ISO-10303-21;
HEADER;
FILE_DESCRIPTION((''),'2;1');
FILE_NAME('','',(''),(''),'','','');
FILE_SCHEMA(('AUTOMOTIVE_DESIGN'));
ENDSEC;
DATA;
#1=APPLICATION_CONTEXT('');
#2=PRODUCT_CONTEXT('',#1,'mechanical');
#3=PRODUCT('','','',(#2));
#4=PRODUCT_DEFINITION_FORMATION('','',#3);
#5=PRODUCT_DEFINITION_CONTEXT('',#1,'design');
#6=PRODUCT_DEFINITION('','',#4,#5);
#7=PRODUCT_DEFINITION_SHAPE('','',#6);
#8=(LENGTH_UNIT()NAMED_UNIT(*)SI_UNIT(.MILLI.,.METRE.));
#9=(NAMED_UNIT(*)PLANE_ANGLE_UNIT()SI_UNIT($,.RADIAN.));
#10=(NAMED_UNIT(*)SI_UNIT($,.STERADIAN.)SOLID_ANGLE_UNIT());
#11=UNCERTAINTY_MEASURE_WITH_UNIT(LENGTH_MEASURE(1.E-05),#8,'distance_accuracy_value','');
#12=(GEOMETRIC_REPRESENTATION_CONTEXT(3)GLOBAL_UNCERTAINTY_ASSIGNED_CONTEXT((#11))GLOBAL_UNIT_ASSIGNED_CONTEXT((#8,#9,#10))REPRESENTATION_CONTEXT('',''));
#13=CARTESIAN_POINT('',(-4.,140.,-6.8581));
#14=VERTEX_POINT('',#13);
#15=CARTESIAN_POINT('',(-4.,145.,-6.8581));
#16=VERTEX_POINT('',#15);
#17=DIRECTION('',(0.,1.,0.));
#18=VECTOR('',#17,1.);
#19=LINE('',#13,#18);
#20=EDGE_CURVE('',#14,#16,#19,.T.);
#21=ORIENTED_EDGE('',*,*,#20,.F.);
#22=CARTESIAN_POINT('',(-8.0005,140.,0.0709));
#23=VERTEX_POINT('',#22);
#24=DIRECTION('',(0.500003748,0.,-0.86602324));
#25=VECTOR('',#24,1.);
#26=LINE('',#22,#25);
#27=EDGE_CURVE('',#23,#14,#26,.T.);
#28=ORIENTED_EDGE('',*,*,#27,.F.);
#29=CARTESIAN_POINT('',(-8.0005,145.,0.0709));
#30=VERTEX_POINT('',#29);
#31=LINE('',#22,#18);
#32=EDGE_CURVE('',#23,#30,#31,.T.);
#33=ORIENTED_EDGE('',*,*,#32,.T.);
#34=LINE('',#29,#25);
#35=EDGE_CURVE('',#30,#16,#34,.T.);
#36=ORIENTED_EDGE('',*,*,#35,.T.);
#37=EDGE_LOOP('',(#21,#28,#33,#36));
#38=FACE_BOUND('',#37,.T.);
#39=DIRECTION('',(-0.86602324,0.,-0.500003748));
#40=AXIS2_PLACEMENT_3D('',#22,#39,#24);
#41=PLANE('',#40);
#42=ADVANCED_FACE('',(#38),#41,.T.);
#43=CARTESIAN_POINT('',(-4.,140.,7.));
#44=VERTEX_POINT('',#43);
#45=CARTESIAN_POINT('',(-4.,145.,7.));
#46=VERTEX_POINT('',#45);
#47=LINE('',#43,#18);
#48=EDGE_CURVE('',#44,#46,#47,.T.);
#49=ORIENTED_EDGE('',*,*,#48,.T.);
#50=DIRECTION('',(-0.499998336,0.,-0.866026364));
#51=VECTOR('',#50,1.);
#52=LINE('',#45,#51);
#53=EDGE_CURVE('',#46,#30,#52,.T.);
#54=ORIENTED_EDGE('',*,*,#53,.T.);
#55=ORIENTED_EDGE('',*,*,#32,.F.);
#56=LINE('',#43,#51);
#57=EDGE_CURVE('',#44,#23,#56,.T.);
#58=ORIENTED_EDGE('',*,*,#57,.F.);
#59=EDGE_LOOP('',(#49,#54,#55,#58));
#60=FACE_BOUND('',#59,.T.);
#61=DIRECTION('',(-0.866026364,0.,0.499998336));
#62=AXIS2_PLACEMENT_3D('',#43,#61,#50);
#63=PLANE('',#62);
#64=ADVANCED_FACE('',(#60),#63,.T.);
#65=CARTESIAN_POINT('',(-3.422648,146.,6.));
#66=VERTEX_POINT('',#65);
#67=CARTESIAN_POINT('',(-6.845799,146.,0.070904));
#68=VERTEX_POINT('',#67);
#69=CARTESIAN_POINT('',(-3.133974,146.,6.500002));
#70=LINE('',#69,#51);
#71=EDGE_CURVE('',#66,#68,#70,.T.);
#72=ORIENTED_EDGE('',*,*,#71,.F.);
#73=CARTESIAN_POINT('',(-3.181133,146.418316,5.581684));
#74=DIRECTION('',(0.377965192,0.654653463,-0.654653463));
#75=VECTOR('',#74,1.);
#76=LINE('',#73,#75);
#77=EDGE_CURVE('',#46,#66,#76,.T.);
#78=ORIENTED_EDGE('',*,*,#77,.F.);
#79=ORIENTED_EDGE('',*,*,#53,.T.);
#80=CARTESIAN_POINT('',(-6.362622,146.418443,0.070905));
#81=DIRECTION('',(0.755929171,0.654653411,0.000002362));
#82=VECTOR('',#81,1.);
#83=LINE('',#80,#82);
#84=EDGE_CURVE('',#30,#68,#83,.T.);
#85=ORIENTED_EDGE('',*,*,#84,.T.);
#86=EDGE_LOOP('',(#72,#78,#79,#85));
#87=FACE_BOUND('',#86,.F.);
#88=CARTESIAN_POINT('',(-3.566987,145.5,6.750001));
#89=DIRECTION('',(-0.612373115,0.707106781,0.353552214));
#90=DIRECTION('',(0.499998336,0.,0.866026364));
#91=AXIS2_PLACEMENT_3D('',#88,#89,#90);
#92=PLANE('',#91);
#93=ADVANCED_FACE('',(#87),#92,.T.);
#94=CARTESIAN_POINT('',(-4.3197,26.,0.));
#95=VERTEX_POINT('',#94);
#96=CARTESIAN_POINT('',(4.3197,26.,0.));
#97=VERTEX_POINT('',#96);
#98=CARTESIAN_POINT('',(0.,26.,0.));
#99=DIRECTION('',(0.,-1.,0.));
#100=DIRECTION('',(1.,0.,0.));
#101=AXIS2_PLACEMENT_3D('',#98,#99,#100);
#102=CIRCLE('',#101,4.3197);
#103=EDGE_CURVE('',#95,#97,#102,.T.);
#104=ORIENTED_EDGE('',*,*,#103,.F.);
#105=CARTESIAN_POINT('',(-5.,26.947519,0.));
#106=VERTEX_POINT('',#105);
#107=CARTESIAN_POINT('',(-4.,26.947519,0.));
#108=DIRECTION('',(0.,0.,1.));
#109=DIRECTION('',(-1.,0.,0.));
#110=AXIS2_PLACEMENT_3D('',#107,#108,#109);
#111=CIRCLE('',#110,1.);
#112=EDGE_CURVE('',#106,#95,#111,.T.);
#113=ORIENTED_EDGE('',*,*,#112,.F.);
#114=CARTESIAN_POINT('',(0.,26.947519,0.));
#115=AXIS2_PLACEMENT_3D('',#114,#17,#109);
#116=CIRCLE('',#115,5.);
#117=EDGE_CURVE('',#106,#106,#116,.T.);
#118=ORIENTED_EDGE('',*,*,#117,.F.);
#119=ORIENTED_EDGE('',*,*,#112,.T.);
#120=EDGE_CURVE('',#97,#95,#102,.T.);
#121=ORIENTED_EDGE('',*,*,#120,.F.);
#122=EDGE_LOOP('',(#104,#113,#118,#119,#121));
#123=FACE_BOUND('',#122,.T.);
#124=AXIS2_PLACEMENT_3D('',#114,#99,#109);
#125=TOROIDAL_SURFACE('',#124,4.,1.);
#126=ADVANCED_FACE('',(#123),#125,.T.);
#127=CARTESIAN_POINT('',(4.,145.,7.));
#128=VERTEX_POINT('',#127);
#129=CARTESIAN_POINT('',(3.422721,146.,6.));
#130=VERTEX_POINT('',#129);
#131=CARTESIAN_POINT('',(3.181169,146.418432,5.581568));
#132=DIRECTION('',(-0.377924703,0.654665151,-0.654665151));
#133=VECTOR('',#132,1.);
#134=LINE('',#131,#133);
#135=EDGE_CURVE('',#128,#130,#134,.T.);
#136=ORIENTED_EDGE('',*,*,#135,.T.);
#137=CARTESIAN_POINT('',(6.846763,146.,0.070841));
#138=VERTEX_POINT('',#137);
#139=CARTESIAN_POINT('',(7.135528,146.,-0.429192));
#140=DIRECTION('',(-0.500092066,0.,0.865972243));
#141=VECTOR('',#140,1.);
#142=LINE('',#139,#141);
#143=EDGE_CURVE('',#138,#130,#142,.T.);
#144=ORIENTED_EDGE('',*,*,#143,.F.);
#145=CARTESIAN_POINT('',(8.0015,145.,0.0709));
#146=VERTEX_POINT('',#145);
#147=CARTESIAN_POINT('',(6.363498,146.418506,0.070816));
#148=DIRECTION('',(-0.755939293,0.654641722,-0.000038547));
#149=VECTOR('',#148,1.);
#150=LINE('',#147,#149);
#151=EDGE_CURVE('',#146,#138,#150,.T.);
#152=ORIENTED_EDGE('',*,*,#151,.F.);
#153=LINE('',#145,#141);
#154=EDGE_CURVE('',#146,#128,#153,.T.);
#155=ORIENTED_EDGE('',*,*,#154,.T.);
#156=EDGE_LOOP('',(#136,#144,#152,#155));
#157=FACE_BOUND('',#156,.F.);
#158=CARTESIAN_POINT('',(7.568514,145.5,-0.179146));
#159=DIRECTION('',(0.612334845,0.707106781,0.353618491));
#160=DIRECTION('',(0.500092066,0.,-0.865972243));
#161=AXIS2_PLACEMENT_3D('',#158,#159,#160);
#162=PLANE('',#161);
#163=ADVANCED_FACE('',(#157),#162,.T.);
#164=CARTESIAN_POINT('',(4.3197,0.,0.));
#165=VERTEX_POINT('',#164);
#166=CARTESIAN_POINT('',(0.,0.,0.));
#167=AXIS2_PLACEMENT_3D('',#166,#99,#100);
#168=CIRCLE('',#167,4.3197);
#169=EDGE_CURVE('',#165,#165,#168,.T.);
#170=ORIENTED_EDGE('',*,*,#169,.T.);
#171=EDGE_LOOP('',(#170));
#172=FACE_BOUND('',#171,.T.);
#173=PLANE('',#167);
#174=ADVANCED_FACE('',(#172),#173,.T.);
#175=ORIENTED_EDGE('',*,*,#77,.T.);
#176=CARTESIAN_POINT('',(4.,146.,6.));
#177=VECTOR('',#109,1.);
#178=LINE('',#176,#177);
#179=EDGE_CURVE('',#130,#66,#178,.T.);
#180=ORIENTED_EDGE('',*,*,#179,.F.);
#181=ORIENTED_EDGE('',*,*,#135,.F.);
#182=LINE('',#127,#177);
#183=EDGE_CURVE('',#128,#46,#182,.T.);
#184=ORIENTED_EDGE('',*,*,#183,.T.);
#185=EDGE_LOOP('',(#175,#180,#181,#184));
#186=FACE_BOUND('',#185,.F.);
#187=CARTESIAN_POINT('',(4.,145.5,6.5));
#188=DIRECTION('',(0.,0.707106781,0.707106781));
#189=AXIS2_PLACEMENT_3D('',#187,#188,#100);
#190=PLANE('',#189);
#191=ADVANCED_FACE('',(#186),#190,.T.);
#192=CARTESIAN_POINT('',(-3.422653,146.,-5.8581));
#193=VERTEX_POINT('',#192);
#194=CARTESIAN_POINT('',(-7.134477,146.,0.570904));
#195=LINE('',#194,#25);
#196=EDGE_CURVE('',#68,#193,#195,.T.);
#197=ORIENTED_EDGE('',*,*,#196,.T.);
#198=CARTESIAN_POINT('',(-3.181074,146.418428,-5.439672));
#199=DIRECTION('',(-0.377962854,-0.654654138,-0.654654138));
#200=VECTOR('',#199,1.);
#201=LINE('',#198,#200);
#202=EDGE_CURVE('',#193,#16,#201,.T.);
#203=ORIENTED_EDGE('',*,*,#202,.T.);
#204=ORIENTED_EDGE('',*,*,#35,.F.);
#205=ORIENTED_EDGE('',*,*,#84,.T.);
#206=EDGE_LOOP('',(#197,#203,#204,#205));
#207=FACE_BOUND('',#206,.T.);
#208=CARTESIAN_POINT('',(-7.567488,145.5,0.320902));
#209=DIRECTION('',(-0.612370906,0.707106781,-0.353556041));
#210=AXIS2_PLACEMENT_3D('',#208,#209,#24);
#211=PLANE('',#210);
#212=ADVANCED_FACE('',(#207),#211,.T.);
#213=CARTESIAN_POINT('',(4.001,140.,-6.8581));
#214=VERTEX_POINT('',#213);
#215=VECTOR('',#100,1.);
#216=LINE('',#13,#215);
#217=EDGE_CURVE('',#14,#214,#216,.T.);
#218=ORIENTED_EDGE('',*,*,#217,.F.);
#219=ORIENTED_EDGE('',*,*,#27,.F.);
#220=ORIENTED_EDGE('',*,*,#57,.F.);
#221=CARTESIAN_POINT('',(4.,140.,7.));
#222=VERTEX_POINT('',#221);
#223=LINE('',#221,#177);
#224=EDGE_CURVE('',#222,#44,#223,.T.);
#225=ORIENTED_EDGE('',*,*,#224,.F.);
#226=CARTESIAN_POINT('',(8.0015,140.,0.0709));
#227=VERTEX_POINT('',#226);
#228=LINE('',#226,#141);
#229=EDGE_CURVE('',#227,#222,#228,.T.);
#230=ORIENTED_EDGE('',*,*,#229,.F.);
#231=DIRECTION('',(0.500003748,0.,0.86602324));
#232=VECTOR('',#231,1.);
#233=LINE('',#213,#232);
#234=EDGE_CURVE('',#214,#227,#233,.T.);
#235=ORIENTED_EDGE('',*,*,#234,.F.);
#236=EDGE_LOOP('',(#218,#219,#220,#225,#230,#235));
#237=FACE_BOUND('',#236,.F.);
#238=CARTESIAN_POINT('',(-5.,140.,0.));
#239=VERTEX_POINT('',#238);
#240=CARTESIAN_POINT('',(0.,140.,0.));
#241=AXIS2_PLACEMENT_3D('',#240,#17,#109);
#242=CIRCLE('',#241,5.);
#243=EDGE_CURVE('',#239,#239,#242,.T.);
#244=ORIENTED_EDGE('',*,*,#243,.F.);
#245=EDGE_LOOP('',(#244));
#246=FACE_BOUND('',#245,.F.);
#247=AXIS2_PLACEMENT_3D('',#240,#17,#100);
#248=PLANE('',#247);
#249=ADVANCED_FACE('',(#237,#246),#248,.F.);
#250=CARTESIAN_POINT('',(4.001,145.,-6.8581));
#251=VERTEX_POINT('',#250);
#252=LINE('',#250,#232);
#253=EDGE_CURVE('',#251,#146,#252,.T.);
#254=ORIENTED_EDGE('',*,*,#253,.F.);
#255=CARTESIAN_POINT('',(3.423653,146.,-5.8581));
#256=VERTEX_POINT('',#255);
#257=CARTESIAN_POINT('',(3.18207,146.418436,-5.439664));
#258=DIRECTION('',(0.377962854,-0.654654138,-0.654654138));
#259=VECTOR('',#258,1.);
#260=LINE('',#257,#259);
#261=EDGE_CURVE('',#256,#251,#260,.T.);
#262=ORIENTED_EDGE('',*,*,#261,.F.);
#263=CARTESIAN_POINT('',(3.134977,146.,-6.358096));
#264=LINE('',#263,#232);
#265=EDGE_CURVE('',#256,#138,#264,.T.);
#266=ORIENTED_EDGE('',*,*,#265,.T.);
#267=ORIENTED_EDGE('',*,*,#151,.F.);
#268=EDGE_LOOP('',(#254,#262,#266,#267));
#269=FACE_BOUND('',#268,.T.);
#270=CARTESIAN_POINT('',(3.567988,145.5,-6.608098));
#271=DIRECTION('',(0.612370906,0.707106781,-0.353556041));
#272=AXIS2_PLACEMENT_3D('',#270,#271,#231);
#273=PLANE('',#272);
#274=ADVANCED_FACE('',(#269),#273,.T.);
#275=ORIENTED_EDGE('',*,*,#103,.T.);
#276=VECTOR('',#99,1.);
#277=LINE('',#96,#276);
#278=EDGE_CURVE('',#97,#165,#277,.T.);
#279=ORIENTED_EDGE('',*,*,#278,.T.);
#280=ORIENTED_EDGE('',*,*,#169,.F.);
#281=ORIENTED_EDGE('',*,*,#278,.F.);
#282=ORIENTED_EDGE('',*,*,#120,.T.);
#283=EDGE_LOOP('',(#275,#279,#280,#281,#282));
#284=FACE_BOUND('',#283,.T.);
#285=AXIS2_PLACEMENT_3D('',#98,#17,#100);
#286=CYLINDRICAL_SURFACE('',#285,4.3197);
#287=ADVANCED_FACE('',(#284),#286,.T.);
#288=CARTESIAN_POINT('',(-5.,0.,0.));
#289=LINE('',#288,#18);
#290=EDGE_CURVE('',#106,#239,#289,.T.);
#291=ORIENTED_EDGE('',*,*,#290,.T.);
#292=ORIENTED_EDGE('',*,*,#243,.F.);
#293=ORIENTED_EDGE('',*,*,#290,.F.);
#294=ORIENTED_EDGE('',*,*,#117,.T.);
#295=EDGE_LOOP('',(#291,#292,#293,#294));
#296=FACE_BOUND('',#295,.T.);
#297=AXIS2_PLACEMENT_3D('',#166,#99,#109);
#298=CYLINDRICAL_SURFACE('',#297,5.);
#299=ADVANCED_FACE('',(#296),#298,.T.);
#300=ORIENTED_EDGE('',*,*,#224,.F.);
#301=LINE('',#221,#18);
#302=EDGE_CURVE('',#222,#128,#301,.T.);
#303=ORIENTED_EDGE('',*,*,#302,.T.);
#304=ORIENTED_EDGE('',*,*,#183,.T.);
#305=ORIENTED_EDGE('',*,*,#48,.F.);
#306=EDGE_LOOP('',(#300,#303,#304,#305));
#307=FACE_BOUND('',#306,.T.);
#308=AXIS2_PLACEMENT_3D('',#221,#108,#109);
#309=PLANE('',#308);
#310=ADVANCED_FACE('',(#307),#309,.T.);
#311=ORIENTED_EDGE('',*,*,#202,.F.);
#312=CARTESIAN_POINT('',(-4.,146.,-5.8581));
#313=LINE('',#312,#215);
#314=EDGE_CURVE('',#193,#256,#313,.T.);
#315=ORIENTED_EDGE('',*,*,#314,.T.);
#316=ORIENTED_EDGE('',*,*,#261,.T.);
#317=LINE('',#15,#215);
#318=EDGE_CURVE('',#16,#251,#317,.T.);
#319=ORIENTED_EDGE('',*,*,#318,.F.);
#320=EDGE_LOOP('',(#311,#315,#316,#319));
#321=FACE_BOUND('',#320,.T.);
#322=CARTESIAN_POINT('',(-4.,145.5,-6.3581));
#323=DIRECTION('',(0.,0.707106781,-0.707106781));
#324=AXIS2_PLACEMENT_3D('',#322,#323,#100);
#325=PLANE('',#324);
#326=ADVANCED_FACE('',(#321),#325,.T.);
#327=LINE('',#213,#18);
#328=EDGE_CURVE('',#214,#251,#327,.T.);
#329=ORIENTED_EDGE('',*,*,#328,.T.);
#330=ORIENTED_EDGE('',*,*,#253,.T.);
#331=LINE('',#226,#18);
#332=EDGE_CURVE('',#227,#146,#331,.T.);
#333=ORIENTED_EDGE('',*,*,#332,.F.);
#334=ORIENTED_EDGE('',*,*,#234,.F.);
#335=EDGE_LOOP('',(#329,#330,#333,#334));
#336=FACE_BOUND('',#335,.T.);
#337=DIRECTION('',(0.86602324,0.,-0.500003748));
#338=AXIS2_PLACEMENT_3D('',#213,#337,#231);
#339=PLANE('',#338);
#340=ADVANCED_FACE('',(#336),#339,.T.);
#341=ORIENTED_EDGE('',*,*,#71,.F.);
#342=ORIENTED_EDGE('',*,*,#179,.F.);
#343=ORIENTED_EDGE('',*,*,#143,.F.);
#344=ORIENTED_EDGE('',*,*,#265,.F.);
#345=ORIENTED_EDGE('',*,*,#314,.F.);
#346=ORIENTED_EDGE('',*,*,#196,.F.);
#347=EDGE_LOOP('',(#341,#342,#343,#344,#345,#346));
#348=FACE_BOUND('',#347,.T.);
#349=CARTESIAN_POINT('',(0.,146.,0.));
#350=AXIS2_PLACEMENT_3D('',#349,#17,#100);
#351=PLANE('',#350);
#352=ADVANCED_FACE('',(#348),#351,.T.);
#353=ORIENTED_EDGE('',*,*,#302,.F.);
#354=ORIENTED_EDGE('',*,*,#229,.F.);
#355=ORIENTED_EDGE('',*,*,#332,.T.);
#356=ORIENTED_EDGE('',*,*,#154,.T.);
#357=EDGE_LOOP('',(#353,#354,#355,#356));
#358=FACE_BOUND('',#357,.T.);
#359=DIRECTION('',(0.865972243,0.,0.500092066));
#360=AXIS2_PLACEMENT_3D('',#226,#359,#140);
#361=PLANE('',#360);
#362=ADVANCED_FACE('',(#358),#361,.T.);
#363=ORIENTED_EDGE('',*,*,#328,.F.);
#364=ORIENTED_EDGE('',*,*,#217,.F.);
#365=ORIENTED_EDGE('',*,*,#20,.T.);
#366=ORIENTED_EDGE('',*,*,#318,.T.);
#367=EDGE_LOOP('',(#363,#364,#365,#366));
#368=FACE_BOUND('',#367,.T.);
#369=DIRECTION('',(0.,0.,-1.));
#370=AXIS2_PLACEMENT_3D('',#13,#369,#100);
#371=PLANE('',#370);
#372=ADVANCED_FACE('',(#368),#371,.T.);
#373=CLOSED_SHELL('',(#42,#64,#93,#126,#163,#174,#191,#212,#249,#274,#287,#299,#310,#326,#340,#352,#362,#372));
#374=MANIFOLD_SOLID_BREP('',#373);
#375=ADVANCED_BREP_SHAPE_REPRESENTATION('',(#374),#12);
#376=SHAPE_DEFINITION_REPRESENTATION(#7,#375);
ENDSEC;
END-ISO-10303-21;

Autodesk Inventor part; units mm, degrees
ref_plane "YZ Plane" through (0, 0, 0) normal (1, 0, 0) x (0, 1, 0)
ref_plane "XZ Plane" through (0, 0, 0) normal (0, 1, 0) x (-1, 0, 0)
ref_plane "XY Plane" through (0, 0, 0) normal (0, 0, 1) x (1, 0, 0)
sketch "Sketch1" plane through (0, 0, 0) normal (0, 1, 0) x (-1, 0, 0)
  circle A0 centre (0, 0) radius 5
  dimension "d0" = 10
extrude "Extrusion1" add sketch "Sketch1" along normal blind 140
sketch "Sketch2" plane through (0, 140, 0) normal (0, 1, 0) x (1, 0, 0)
  line L0 (4, -7) -> (-4, -7)
  line L1 (-4, -7) -> (-8.0005, -0.0709)
  line L2 (-4, -7) -> (4.001, -7) construction
  line L3 (-8.0005, -0.0709) -> (-4, 6.8581)
  line L4 (-4, 6.8581) -> (4.001, 6.8581)
  line L5 (4.001, 6.8581) -> (8.0015, -0.0709)
  line L6 (8.0015, -0.0709) -> (4, -7)
  dimension "d5" = 8
  dimension "d6" = 8.001
  dimension "d7" = 120
  dimension "d8" = 8.001
  dimension "d9" = 120
  dimension "d10" = 8.001
  dimension "d11" = 120
  dimension "d12" = 8.001
  dimension "d13" = 120
extrude "Extrusion2" add sketch "Sketch2" along normal blind 6
chamfer "Chamfer1" distance 1 angle 45 6 edges at (0, 146, 7) (-6.0002, 146, 3.5355) (6.0008, 146, 3.5355) (6.0013, 146, -3.3936) (0.0005, 146, -6.8581) (-6.0002, 146, -3.3936)
sketch "Sketch3" plane through (0, 0, 0) normal (0, -1, 0) x (1, 0, 0)
  circle A0 centre (0, 0) radius 5 projected
extrude "Extrusion3" cut sketch "Sketch3" against normal blind 26
sketch "Sketch4" plane through (0, 26, 0) normal (0, -1, 0) x (1, 0, 0)
  circle A0 centre (0, 0) radius 5 projected
  circle A1 centre (0, 0) radius 4.3197
extrude "Extrusion4" add sketch "Sketch4" along normal blind 26 contours A1
fillet "Fillet1" radius 1 1 edges at (5, 26, 0)
thread "Thread1" size "3/8-16 UNC" class "2A" standard "ANSI Unified Screw Threads" full length
properties part number "Axel" material "Aluminum 6061-AHC"
